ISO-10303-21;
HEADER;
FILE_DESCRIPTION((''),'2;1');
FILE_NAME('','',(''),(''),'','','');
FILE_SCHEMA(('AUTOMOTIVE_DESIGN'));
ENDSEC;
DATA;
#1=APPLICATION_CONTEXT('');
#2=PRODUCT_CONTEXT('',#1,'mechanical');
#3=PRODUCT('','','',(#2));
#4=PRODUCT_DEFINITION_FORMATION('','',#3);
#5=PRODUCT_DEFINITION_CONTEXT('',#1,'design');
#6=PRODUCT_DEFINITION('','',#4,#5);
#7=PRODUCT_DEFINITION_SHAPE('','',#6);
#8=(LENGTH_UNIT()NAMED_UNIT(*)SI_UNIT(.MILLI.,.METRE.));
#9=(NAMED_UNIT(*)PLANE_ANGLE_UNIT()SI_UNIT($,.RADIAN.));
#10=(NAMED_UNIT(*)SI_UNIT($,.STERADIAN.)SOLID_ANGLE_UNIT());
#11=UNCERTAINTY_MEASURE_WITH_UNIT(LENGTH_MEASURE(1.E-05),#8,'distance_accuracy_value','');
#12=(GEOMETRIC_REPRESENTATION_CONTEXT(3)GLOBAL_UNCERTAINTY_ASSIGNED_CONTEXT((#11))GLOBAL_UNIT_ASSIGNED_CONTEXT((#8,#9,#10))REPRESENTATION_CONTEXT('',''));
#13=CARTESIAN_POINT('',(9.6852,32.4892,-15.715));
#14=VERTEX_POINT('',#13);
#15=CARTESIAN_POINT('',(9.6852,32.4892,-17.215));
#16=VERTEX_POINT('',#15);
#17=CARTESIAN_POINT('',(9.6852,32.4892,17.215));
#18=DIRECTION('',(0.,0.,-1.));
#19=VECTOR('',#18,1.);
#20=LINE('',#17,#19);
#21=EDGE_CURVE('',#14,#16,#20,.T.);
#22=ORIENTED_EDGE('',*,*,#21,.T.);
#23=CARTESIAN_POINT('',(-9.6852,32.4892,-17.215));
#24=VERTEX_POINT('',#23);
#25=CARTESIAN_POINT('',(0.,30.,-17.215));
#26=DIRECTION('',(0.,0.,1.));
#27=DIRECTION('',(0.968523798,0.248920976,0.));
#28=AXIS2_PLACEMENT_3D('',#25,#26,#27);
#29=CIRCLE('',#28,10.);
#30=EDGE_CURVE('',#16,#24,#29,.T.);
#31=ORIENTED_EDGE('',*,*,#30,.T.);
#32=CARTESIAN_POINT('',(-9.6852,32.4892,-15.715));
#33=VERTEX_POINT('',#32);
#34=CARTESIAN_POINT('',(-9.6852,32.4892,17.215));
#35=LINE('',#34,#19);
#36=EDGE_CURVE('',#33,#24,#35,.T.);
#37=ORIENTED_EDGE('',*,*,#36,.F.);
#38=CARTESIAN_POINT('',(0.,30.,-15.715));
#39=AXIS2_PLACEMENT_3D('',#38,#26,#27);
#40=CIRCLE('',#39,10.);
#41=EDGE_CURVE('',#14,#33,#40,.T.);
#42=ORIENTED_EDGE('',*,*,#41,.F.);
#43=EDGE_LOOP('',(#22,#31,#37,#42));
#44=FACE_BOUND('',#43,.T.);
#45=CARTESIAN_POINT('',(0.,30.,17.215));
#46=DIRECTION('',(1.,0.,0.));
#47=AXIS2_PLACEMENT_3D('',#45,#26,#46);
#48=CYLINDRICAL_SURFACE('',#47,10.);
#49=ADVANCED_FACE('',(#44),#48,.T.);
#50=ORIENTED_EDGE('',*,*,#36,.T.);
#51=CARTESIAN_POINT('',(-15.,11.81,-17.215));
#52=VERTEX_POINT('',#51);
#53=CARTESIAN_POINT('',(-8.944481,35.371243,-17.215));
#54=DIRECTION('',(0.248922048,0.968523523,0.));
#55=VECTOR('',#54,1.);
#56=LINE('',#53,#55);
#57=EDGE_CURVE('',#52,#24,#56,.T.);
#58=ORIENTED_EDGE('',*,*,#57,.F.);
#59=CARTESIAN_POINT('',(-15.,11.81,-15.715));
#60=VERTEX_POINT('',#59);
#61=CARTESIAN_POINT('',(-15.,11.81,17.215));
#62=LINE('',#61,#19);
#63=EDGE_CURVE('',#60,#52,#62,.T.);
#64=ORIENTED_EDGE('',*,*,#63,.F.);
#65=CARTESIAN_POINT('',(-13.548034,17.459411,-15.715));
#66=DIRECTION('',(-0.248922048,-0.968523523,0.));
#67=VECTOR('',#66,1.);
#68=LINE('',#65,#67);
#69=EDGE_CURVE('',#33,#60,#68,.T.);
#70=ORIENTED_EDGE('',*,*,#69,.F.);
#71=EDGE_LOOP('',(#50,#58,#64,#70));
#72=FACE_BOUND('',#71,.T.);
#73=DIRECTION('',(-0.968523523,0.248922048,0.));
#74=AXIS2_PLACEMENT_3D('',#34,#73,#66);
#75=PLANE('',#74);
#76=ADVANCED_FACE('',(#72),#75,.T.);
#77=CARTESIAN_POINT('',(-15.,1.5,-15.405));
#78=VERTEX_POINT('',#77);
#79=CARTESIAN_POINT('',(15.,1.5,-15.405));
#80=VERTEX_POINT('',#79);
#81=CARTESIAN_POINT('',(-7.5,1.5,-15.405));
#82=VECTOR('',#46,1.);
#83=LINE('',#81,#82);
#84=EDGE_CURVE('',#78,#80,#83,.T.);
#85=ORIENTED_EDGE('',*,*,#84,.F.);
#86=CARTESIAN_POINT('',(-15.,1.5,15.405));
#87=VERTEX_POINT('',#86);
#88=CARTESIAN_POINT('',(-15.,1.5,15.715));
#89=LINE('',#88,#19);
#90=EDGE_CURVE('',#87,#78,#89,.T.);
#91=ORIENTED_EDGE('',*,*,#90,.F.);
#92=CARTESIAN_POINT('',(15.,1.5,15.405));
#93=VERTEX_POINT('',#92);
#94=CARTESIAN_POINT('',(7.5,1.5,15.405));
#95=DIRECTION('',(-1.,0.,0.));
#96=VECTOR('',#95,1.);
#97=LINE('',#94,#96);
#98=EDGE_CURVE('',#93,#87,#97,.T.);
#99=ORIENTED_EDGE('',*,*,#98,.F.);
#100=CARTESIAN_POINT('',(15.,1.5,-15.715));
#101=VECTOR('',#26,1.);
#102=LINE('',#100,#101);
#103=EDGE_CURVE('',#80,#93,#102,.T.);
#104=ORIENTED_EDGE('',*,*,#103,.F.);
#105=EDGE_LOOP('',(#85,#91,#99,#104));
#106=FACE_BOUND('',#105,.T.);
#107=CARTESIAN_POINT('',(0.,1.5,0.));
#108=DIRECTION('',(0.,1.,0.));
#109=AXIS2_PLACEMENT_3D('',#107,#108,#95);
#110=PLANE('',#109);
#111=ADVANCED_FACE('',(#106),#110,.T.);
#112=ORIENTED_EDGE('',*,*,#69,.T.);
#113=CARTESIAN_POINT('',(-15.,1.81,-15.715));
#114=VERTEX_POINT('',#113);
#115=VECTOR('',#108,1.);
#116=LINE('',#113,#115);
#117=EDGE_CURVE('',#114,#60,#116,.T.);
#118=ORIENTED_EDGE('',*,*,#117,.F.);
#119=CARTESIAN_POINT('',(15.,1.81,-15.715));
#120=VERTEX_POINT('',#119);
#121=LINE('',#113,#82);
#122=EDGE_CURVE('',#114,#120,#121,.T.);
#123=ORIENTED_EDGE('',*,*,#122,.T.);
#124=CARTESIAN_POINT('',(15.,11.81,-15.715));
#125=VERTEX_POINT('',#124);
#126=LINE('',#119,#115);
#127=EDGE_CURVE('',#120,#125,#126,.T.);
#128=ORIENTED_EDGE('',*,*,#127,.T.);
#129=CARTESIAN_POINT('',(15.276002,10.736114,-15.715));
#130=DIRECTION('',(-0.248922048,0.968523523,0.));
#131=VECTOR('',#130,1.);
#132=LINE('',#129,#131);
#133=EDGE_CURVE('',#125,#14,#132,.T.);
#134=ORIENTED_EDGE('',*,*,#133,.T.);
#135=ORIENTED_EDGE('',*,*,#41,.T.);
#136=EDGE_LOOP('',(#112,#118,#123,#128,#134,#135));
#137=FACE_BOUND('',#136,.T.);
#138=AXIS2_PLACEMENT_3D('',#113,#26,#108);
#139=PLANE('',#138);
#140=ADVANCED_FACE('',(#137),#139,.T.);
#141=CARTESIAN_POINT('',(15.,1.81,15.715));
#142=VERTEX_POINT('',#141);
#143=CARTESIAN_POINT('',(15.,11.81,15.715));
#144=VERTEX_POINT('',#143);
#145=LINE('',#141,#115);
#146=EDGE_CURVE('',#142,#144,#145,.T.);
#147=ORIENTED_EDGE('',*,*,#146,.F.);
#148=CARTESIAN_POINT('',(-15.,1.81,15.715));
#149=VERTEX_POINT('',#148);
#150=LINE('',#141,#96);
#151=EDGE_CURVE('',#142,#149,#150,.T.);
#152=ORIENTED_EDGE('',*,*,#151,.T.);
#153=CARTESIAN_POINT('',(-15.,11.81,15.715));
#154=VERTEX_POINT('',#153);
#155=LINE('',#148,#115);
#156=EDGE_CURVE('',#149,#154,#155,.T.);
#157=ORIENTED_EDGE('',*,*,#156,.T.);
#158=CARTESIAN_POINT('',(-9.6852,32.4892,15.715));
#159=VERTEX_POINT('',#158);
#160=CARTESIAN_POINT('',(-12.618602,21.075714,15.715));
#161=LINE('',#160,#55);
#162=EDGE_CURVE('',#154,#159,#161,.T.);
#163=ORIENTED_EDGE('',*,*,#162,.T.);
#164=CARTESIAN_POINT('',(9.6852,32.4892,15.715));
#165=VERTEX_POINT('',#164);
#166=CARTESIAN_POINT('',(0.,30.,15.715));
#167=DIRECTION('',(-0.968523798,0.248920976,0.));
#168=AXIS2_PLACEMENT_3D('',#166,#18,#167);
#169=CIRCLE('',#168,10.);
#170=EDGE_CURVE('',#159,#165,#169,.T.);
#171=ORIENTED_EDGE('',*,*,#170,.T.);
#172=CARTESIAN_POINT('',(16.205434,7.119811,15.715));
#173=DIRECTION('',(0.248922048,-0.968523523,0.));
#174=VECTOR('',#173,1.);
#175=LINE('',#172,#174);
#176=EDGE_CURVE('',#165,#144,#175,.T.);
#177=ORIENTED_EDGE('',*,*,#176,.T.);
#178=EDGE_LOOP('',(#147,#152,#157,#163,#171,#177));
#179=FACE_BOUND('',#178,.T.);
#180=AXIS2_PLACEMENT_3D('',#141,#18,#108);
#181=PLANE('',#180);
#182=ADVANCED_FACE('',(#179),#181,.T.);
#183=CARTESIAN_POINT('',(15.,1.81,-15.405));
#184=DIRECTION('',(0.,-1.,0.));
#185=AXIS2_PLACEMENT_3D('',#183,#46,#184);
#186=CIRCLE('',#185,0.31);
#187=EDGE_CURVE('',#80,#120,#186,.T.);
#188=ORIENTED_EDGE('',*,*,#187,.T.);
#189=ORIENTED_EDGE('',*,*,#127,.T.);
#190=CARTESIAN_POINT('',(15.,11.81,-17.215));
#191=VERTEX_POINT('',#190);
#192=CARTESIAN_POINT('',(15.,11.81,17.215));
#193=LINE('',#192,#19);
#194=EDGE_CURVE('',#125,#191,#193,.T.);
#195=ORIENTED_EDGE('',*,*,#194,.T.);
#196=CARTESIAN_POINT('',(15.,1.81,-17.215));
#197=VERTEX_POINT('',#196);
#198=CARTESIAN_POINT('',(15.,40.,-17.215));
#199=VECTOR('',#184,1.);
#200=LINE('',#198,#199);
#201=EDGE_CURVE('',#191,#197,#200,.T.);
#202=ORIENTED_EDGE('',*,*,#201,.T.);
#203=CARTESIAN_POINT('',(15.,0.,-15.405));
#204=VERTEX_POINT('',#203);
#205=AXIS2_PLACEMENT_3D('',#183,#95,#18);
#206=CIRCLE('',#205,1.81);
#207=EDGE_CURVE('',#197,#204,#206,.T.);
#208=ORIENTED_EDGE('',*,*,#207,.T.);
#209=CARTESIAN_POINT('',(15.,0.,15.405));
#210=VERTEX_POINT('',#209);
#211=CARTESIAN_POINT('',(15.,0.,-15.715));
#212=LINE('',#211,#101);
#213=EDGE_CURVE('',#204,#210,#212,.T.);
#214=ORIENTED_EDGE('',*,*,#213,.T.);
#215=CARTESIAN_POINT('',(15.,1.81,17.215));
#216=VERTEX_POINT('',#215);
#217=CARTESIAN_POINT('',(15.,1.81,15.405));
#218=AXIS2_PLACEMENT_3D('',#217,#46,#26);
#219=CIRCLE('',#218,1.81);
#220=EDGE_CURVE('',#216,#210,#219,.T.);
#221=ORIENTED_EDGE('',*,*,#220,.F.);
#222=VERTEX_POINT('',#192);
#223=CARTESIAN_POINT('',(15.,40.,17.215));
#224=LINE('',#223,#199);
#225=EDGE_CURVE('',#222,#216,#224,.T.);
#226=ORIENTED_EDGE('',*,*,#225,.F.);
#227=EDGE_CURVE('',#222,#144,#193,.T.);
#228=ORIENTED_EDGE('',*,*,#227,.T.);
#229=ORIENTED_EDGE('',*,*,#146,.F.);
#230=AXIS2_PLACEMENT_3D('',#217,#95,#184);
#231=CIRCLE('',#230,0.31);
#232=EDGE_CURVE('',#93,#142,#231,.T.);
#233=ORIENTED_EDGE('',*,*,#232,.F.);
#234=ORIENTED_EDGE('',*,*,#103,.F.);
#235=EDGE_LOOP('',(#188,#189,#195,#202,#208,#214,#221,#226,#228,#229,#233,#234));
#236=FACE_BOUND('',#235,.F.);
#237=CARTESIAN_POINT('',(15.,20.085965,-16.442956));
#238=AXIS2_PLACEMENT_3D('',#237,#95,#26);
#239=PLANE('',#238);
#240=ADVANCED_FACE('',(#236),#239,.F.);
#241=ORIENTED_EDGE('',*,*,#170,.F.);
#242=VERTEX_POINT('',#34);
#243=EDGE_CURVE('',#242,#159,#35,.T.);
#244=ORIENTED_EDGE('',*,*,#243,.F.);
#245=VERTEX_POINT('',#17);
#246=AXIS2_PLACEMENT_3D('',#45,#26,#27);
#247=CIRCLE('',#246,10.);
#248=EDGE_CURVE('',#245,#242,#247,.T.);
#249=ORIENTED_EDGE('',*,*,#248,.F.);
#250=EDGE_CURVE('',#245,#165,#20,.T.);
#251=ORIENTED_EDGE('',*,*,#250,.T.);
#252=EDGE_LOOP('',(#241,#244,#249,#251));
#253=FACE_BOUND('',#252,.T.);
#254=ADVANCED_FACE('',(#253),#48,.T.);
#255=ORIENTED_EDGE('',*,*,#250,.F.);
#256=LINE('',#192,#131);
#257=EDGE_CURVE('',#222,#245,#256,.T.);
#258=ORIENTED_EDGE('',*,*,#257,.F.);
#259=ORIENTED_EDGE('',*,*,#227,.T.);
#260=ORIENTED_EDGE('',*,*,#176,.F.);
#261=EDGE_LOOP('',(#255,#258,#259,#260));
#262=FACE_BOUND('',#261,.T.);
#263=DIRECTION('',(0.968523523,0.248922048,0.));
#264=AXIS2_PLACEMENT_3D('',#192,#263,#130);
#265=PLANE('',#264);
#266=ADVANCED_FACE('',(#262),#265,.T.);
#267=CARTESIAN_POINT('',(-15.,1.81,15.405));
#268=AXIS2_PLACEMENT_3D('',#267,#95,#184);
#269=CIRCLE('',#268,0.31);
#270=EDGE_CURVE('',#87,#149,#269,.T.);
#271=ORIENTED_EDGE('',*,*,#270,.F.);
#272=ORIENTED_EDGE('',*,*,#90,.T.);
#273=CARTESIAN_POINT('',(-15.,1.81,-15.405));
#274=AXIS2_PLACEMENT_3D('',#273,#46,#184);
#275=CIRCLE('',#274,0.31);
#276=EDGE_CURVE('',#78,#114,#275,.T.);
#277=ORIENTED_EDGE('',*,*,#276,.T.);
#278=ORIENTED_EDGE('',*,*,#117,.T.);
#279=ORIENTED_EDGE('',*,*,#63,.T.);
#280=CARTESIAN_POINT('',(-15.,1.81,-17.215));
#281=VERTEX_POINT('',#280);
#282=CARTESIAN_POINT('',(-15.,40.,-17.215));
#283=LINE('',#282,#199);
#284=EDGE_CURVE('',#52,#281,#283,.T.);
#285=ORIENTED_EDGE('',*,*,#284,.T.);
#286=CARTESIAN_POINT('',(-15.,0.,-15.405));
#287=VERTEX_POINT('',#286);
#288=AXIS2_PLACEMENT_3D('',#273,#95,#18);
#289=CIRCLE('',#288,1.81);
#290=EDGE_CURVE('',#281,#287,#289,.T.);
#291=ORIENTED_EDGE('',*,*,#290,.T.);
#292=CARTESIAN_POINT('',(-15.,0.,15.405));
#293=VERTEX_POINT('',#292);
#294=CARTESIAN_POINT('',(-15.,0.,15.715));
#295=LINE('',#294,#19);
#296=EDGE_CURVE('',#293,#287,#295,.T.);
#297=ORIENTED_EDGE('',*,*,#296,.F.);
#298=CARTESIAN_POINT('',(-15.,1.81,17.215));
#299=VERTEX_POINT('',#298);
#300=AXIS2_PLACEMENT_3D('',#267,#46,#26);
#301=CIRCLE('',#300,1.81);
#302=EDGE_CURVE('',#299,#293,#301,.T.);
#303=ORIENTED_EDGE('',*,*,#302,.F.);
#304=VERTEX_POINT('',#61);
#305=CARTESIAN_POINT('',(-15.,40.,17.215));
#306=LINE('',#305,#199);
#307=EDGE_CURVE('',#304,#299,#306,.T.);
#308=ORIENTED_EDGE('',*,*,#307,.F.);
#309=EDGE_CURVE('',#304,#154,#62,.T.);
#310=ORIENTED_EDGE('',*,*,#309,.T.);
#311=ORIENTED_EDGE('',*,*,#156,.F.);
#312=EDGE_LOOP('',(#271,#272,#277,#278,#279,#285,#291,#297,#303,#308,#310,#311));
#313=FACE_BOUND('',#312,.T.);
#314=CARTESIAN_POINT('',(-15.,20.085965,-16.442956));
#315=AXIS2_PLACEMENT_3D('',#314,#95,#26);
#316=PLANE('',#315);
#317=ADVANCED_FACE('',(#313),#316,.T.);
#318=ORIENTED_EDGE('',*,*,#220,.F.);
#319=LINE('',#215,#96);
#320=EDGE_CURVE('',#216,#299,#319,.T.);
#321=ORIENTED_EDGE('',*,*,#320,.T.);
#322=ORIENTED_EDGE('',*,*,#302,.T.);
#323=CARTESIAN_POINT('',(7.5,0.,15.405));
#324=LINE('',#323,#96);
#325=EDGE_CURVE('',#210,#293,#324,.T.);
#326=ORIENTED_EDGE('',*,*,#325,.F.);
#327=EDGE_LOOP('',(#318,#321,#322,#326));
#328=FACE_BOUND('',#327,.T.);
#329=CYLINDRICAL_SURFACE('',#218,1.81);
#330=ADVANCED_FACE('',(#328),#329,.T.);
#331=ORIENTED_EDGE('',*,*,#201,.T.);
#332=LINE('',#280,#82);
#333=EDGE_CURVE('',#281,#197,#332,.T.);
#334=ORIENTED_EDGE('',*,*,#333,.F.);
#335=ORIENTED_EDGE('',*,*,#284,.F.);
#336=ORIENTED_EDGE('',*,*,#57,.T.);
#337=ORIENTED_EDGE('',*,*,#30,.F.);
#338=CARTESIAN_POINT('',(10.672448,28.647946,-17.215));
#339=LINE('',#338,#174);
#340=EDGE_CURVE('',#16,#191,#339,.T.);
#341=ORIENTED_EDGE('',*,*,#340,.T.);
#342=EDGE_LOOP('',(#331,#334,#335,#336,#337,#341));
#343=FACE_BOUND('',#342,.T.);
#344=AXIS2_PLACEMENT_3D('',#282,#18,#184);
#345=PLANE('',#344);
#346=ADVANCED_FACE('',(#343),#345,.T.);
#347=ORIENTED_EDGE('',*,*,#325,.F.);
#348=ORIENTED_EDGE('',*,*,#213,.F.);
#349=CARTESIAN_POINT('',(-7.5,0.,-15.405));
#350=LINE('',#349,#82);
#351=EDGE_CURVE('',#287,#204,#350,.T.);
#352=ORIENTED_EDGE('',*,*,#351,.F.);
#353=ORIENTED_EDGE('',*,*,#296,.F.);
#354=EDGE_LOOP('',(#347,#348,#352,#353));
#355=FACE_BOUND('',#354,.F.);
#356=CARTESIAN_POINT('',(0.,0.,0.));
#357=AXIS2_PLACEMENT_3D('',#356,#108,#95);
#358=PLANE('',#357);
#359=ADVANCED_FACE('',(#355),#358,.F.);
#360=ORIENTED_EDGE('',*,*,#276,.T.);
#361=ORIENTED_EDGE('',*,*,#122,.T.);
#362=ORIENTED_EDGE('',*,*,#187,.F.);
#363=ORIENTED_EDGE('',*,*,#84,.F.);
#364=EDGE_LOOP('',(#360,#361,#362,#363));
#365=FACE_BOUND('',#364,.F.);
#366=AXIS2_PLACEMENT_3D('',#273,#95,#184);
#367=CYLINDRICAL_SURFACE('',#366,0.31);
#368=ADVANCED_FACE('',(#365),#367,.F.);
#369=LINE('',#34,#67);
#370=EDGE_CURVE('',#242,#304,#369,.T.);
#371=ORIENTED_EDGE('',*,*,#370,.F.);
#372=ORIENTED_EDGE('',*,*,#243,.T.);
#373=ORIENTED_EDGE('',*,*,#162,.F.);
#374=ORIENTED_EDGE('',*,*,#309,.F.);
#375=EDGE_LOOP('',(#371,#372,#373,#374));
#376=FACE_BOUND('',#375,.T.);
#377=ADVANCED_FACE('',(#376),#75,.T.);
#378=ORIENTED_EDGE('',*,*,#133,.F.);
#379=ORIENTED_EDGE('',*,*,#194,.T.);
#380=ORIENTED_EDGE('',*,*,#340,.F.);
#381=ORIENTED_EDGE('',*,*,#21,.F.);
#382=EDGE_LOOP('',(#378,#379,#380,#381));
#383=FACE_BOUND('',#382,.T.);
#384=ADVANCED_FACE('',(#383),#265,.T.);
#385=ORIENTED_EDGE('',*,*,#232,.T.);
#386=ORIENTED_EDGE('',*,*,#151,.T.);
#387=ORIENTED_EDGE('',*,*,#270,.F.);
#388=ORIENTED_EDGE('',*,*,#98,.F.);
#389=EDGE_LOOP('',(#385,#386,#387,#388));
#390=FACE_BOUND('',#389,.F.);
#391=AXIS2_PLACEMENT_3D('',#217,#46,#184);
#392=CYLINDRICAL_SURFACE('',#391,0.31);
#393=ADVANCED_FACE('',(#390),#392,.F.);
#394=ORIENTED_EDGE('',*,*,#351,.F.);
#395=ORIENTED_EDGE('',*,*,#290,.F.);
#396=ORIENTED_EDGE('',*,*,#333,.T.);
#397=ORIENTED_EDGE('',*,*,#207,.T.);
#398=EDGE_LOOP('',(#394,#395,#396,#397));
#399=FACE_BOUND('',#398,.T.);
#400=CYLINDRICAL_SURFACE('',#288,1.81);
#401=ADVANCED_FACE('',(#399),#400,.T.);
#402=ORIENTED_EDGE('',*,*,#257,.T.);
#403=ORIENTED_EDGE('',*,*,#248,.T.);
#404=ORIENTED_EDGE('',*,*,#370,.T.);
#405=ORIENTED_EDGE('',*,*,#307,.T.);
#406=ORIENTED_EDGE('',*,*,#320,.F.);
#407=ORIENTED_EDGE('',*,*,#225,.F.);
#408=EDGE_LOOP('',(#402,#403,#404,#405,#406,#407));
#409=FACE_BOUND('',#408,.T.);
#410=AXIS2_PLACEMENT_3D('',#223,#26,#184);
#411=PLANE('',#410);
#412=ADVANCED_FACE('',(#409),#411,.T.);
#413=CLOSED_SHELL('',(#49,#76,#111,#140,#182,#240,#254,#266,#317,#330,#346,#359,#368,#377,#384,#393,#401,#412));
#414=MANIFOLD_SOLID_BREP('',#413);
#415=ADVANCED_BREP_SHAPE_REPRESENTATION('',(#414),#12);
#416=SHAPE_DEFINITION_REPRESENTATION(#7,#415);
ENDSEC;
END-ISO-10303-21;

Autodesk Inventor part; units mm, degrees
ref_plane "YZ Plane" through (0, 0, 0) normal (1, 0, 0) x (0, 1, 0)
ref_plane "XZ Plane" through (0, 0, 0) normal (0, 1, 0) x (-1, 0, 0)
ref_plane "XY Plane" through (0, 0, 0) normal (0, 0, 1) x (1, 0, 0)
sketch "Sketch1" plane through (0, 0, 0) normal (0, 1, 0) x (-1, 0, 0)
  line L0 (15, -15.715) -> (-15, -15.715)
  line L1 (-15, -15.715) -> (-15, 15.715)
  line L2 (-15, 15.715) -> (15, 15.715)
  line L3 (15, 15.715) -> (15, -15.715)
  point P0 (0, 0)
  dimension "d0" = 30
  dimension "d1" = 15
  dimension "d2" = 31.43
  dimension "d3" = 15.715
extrude "Plate1" add sketch "Sketch1" along normal blind 1.5
sketch "Sketch2" plane through (15, 0, 17.215) normal (0, 0, -1) x (-1, 0, 0)
  line L0 (30, 0) -> (0, 0)
  line L1 (0, 0) -> (0, 40)
  line L2 (0, 40) -> (30, 40)
  line L3 (30, 40) -> (30, 0)
edge flange "Flange1" height 40 angle 90 thickness 1.5 bend radius 0.31 thickness toward (0, 0, -1) relief tear relief width 1.5 relief depth 0.75 edges at (0, 1.5, 15.715) wall of the first edge with corners at (-15, 0, 17.215) (15, 0, 17.215) (15, 40, 17.215) (-15, 40, 17.215)
bend "Bend1"
corner "Corner1"
sketch "Sketch3" plane through (-15, 0, -17.215) normal (0, 0, 1) x (1, 0, 0)
  line L0 (30, 0) -> (0, 0)
  line L1 (0, 0) -> (0, 40)
  line L2 (0, 40) -> (30, 40)
  line L3 (30, 40) -> (30, 0)
edge flange "Flange2" height 40 angle 90 thickness 1.5 bend radius 0.31 thickness toward (0, 0, 1) relief tear relief width 1.5 relief depth 0.75 edges at (0, 1.5, -15.715) wall of the first edge with corners at (15, 0, -17.215) (-15, 0, -17.215) (-15, 40, -17.215) (15, 40, -17.215)
bend "Bend2"
corner "Corner2"
sketch "Sketch4" plane through (-15, 40, 17.215) normal (0, 0, 1) x (1, 0, 0)
  circle A0 centre (15, -10) radius 10
  line L0 (0, 0) -> (30, 0) projected
  line L1 (30, 0) -> (30, -38.19) projected
  line L2 (5.3148, -7.5108) -> (0, -28.19)
  line L3 (0, -28.19) -> (0, -38.19)
  line L4 (0, -38.19) -> (30, -38.19)
  line L5 (30, -38.19) -> (30, -28.19)
  line L6 (30, -28.19) -> (24.6852, -7.5108)
  line L7 (0, -38.19) -> (30, -38.19) projected
  line L8 (0, -38.19) -> (0, 0) projected
  point P0 (15, -40)
  point P1 (0, -28.19)
  point P2 (15, 0)
  point P3 (30, -28.19)
  dimension "d25" = 10
  dimension "d26" = 15
  dimension "d27" = 20
  dimension "d29" = 30
  dimension "d30" = 0
  dimension "d31" = 10
  dimension "d32" = 10
  dimension "d33" = 0
extrude "Extrusion1" cut sketch "Sketch4" against normal blind 50 contours A0 L0 L1 L6 | L2 L8 L0 A0
equation "\"d4\" = Thickness"
equation "\"d5\" = BendReliefWidth"
equation "\"d6\" = BendReliefDepth"
equation "\"d7\" = MinimumRemnant"
equation "\"d8\" = TransitionRadius"
equation "\"d11\" = BendRadius"
equation "\"d12\" = CornerReliefSize"
equation "\"d13\" = GapSize"
equation "\"d14\" = JacobiRadiusSize"
equation "\"d15\" = BendReliefWidth"
equation "\"d16\" = BendReliefDepth"
equation "\"d17\" = MinimumRemnant"
equation "\"d18\" = TransitionRadius"
equation "\"d21\" = BendRadius"
equation "\"d22\" = CornerReliefSize"
equation "\"d23\" = GapSize"
equation "\"d24\" = JacobiRadiusSize"
equation "\"BendReliefWidth\" = Thickness"
equation "\"BendReliefDepth\" = 0.5 * Thickness"
equation "\"CornerReliefSize\" = 4 * Thickness"
equation "\"MinimumRemnant\" = 2 * Thickness"
equation "\"TransitionRadius\" = BendRadius"
equation "\"JacobiRadiusSize\" = BendRadius"
equation "\"GapSize\" = Thickness"
equation "\"Thickness\" = 1.5"
equation "\"BendRadius\" = 0.31"
properties part number "axis_12_bottom_frame(top)" material "Aluminum 6061-AHC"
